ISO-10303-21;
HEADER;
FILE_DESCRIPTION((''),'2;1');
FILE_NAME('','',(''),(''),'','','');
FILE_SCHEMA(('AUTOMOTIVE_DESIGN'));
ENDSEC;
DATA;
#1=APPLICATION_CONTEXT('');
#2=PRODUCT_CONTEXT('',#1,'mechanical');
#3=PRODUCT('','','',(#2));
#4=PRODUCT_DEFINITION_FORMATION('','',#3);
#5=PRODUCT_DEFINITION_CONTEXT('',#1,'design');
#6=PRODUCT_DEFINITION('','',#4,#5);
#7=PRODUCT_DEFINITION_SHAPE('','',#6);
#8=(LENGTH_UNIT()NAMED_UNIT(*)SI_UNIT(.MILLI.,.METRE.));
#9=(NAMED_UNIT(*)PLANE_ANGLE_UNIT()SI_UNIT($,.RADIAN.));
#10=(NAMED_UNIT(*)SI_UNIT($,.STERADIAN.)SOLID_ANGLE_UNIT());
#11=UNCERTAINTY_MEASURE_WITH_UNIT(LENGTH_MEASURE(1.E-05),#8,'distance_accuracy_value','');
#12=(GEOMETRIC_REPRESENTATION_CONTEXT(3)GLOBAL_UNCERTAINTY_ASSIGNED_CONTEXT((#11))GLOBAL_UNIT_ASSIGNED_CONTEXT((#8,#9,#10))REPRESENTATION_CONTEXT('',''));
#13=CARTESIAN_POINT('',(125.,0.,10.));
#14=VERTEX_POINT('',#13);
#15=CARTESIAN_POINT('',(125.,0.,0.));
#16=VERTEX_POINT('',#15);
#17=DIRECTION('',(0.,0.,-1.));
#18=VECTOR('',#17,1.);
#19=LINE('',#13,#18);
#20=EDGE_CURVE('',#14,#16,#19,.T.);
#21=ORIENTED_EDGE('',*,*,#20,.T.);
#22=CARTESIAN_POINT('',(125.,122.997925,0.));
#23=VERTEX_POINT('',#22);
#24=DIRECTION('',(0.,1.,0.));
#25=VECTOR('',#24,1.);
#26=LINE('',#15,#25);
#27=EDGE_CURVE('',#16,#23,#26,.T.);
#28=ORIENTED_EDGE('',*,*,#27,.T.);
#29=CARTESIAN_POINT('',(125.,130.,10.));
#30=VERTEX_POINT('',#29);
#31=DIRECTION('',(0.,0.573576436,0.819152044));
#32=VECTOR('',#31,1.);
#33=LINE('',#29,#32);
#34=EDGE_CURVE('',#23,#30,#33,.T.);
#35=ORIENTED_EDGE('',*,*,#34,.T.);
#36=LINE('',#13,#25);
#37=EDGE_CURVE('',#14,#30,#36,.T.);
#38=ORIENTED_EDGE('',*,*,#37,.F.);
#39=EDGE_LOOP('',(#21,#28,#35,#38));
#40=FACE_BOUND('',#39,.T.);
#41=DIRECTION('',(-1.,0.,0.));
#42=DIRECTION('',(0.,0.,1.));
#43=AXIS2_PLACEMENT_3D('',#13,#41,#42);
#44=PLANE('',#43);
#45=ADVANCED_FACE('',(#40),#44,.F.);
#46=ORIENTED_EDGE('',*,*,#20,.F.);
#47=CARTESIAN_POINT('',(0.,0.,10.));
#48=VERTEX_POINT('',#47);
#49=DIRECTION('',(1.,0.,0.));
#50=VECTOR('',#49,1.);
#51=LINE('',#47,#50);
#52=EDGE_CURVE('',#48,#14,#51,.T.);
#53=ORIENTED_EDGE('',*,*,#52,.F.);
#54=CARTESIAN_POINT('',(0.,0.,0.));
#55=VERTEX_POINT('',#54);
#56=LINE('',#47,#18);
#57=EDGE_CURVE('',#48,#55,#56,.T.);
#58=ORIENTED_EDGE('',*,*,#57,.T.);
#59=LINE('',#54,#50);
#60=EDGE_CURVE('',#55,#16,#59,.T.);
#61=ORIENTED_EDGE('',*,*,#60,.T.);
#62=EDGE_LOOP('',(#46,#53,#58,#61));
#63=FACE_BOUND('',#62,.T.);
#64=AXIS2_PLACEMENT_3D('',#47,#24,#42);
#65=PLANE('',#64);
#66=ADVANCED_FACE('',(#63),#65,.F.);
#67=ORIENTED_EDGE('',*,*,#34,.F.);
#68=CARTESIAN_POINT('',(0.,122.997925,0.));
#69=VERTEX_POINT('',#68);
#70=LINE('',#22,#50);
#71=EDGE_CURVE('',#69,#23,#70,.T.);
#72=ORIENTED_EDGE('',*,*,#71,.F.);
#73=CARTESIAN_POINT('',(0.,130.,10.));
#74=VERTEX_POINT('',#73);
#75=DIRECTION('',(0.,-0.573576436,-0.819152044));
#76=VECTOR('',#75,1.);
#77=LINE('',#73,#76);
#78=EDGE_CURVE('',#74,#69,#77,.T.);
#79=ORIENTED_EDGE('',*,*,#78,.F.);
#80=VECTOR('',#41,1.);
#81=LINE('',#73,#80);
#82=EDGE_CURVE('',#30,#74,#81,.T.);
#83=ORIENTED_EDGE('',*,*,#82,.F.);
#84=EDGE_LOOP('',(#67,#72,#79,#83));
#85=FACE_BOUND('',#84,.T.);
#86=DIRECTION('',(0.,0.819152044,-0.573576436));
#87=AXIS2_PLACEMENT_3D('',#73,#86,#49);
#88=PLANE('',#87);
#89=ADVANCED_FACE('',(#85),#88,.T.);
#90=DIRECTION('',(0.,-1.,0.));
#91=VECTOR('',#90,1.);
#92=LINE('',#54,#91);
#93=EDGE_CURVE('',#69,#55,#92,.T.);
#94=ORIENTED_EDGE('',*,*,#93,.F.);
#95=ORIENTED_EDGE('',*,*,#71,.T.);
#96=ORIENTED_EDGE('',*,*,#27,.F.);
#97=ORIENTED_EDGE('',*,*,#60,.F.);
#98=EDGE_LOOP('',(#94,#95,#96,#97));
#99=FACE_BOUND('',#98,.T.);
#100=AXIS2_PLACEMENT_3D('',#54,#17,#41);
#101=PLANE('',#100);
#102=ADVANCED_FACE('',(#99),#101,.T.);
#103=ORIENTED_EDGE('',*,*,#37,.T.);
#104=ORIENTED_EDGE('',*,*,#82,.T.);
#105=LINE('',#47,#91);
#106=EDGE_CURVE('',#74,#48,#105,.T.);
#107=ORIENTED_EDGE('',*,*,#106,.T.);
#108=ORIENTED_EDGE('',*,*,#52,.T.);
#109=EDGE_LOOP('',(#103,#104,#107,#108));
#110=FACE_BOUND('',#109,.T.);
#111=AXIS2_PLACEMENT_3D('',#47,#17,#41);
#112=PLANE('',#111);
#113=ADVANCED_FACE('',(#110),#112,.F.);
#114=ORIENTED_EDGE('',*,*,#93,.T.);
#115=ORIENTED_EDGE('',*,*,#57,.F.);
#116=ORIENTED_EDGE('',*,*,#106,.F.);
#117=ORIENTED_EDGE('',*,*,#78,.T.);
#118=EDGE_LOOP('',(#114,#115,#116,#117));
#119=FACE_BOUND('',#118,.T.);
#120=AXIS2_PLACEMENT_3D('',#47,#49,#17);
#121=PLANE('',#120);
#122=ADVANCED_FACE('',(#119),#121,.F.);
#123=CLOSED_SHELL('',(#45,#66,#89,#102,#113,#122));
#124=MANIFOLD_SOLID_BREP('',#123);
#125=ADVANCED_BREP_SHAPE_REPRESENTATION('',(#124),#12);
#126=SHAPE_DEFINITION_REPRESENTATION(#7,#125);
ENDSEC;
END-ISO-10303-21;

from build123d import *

# Parameters (mm, degrees)
ESQUISSE1_W        = 125
ESQUISSE1_H        = 130
BOSS_EXTRU_1_DEPTH = 10
CHANFREIN1_SIZE2   = 7.002075382
CHANFREIN1_SIZE    = 10


with BuildPart() as part:
    # Esquisse1 → Boss.-Extru.1 (new body)
    with BuildSketch(Plane.XY):
        with Locations((62.5, 65)):
            Rectangle(ESQUISSE1_W, ESQUISSE1_H)
    extrude(amount=BOSS_EXTRU_1_DEPTH)

    # Chanfrein1
    chanfrein1_edges = [part.edges().sort_by_distance(p)[0] for p in [
        (62.5, 130, 0),
    ]]
    chanfrein1_side = [part.faces().sort_by_distance(p)[0] for p in [
        (62.5, 130, 0.140041508),
    ]]
    chamfer(chanfrein1_edges, length=CHANFREIN1_SIZE - 0.0001, length2=CHANFREIN1_SIZE2 - 0.0001, reference=chanfrein1_side[0])  # a hair under: the kernel refuses the full size


solid = part.part
